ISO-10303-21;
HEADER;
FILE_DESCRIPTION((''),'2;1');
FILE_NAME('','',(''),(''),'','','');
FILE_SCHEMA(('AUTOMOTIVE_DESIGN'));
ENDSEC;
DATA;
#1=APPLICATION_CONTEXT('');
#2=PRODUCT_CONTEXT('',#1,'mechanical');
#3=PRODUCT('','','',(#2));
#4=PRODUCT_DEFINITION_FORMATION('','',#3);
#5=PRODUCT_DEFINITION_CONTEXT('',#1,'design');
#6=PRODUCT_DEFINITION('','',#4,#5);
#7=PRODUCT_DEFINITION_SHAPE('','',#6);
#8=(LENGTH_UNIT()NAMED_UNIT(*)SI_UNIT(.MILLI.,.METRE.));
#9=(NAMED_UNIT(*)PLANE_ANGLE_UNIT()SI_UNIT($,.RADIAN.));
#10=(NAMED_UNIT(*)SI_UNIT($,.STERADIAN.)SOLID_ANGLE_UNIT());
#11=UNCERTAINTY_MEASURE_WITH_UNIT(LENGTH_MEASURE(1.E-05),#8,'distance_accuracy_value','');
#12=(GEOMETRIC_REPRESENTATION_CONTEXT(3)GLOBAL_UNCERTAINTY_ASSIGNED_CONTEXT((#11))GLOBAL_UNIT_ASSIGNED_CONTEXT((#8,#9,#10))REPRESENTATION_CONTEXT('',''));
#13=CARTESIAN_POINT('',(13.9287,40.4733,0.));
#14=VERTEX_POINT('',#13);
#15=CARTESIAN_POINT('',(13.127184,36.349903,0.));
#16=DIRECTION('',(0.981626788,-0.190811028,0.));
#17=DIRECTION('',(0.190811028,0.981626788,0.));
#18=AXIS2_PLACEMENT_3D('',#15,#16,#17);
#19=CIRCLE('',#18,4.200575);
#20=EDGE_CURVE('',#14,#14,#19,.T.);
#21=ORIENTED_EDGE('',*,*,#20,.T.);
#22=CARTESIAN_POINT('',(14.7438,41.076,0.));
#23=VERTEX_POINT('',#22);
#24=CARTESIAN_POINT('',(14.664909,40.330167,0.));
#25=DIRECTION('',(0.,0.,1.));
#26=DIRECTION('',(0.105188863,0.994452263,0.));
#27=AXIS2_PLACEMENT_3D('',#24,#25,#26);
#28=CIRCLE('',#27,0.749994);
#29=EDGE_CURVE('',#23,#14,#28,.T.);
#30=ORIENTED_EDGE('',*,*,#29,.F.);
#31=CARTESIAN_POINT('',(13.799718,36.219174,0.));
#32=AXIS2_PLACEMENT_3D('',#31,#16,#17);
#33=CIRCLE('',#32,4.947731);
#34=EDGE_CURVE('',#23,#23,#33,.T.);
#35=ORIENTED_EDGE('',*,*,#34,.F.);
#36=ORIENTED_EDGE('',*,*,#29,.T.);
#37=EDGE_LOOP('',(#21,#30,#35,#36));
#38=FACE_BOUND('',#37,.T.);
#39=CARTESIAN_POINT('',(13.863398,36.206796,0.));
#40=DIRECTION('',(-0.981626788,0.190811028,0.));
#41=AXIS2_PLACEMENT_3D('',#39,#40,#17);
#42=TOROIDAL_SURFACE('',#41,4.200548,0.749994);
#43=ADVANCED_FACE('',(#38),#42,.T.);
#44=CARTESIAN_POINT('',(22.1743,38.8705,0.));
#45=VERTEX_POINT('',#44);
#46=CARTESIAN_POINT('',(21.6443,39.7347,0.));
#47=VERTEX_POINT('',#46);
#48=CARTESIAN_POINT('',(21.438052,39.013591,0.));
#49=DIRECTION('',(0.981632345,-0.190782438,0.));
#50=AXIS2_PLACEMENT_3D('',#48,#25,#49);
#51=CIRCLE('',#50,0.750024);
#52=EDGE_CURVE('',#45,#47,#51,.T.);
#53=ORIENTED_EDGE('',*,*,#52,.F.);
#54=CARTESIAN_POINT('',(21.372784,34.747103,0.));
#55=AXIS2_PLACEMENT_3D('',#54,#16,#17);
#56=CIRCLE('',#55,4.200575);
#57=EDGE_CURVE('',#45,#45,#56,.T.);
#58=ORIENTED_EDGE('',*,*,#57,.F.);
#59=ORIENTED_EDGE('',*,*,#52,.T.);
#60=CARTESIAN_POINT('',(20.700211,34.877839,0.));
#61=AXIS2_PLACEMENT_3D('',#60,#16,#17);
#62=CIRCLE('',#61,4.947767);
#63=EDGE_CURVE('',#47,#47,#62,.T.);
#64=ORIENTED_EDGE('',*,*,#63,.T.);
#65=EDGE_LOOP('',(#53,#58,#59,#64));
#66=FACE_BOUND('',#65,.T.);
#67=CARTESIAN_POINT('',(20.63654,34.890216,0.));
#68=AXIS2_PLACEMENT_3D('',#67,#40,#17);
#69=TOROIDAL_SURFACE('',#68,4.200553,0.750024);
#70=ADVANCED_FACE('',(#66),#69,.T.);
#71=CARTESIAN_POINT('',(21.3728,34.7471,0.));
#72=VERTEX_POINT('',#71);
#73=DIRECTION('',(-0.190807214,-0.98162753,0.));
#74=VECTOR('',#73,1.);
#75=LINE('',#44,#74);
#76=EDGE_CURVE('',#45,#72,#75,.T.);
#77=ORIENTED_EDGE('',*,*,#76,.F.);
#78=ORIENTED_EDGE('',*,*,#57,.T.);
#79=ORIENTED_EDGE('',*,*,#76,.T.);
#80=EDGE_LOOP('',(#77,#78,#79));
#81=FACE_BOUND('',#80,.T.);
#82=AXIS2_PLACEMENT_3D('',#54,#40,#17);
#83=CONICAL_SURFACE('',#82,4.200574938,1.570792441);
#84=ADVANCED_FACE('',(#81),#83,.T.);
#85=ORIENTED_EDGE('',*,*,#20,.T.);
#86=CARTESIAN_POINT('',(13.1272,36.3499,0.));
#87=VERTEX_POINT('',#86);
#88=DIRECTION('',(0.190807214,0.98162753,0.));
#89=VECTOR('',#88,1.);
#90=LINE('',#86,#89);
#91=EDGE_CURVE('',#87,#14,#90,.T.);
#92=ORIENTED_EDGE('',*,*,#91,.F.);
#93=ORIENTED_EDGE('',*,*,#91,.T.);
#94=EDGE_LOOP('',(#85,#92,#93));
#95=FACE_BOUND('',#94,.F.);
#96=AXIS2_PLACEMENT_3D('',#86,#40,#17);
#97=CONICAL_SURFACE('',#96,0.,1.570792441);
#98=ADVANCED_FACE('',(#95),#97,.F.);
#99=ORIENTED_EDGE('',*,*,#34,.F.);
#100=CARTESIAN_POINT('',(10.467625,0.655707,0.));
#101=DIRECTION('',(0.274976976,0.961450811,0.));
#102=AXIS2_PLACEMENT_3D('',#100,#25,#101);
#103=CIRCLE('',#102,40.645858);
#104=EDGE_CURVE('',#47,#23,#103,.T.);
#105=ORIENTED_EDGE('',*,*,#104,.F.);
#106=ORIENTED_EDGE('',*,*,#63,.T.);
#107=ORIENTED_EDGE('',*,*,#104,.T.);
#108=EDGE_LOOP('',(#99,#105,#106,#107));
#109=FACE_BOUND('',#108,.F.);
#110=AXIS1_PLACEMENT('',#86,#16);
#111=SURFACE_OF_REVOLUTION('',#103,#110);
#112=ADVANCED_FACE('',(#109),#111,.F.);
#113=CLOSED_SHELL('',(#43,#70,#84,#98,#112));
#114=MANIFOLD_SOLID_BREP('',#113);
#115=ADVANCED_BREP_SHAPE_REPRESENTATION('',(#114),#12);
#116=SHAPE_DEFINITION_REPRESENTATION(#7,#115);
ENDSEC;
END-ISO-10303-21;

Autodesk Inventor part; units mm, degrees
sketch "Sketch_1" plane through (0, 0, 0) normal (0, 0, 1) x (1, 0, 0)
  line L0 (21.3728, 34.7471) -> (13.1272, 36.3499)
  line L1 (13.1272, 36.3499) -> (13.9287, 40.4733)
  arc A0 (14.7438, 41.076) -> (13.9287, 40.4733) centre (14.6649, 40.3302) ccw
  arc A1 (21.6443, 39.7347) -> (14.7438, 41.076) centre (10.467, 0.6531) ccw
  arc A2 (22.1743, 38.8705) -> (21.6443, 39.7347) centre (21.4381, 39.0136) ccw
  line L2 (22.1743, 38.8705) -> (21.3728, 34.7471)
  line L3 (21.3728, 34.7471) -> (13.1272, 36.3499)
revolve "Revolution1" add sketch "Sketch_1" angle 360 about axis through (21.3728, 34.7471, 0) along (0.9816272, -0.190809, 0)
ref_plane "NO_GEO_XY" through (0, 0, 0) normal (1, 0, 0) x (0, 0, -1)
ref_plane "NO_GEO_YZ" through (0, 0, 0) normal (0, 0, -1) x (0, 1, 0)
ref_plane "NO_GEO_ZX" through (0, 0, 0) normal (0, 1, 0) x (1, 0, 0)
ref_plane "roller2_XY" through (0, 35.5485, 0) normal (1, 0, 0) x (0, 0, -1)
ref_plane "roller2_YZ" through (0, 35.5485, 0) normal (0, 0, -1) x (0, 1, 0)
ref_plane "roller2_ZX" through (0, 35.5485, 0) normal (0, 1, 0) x (1, 0, 0)
properties part number "21308 E_r2"
